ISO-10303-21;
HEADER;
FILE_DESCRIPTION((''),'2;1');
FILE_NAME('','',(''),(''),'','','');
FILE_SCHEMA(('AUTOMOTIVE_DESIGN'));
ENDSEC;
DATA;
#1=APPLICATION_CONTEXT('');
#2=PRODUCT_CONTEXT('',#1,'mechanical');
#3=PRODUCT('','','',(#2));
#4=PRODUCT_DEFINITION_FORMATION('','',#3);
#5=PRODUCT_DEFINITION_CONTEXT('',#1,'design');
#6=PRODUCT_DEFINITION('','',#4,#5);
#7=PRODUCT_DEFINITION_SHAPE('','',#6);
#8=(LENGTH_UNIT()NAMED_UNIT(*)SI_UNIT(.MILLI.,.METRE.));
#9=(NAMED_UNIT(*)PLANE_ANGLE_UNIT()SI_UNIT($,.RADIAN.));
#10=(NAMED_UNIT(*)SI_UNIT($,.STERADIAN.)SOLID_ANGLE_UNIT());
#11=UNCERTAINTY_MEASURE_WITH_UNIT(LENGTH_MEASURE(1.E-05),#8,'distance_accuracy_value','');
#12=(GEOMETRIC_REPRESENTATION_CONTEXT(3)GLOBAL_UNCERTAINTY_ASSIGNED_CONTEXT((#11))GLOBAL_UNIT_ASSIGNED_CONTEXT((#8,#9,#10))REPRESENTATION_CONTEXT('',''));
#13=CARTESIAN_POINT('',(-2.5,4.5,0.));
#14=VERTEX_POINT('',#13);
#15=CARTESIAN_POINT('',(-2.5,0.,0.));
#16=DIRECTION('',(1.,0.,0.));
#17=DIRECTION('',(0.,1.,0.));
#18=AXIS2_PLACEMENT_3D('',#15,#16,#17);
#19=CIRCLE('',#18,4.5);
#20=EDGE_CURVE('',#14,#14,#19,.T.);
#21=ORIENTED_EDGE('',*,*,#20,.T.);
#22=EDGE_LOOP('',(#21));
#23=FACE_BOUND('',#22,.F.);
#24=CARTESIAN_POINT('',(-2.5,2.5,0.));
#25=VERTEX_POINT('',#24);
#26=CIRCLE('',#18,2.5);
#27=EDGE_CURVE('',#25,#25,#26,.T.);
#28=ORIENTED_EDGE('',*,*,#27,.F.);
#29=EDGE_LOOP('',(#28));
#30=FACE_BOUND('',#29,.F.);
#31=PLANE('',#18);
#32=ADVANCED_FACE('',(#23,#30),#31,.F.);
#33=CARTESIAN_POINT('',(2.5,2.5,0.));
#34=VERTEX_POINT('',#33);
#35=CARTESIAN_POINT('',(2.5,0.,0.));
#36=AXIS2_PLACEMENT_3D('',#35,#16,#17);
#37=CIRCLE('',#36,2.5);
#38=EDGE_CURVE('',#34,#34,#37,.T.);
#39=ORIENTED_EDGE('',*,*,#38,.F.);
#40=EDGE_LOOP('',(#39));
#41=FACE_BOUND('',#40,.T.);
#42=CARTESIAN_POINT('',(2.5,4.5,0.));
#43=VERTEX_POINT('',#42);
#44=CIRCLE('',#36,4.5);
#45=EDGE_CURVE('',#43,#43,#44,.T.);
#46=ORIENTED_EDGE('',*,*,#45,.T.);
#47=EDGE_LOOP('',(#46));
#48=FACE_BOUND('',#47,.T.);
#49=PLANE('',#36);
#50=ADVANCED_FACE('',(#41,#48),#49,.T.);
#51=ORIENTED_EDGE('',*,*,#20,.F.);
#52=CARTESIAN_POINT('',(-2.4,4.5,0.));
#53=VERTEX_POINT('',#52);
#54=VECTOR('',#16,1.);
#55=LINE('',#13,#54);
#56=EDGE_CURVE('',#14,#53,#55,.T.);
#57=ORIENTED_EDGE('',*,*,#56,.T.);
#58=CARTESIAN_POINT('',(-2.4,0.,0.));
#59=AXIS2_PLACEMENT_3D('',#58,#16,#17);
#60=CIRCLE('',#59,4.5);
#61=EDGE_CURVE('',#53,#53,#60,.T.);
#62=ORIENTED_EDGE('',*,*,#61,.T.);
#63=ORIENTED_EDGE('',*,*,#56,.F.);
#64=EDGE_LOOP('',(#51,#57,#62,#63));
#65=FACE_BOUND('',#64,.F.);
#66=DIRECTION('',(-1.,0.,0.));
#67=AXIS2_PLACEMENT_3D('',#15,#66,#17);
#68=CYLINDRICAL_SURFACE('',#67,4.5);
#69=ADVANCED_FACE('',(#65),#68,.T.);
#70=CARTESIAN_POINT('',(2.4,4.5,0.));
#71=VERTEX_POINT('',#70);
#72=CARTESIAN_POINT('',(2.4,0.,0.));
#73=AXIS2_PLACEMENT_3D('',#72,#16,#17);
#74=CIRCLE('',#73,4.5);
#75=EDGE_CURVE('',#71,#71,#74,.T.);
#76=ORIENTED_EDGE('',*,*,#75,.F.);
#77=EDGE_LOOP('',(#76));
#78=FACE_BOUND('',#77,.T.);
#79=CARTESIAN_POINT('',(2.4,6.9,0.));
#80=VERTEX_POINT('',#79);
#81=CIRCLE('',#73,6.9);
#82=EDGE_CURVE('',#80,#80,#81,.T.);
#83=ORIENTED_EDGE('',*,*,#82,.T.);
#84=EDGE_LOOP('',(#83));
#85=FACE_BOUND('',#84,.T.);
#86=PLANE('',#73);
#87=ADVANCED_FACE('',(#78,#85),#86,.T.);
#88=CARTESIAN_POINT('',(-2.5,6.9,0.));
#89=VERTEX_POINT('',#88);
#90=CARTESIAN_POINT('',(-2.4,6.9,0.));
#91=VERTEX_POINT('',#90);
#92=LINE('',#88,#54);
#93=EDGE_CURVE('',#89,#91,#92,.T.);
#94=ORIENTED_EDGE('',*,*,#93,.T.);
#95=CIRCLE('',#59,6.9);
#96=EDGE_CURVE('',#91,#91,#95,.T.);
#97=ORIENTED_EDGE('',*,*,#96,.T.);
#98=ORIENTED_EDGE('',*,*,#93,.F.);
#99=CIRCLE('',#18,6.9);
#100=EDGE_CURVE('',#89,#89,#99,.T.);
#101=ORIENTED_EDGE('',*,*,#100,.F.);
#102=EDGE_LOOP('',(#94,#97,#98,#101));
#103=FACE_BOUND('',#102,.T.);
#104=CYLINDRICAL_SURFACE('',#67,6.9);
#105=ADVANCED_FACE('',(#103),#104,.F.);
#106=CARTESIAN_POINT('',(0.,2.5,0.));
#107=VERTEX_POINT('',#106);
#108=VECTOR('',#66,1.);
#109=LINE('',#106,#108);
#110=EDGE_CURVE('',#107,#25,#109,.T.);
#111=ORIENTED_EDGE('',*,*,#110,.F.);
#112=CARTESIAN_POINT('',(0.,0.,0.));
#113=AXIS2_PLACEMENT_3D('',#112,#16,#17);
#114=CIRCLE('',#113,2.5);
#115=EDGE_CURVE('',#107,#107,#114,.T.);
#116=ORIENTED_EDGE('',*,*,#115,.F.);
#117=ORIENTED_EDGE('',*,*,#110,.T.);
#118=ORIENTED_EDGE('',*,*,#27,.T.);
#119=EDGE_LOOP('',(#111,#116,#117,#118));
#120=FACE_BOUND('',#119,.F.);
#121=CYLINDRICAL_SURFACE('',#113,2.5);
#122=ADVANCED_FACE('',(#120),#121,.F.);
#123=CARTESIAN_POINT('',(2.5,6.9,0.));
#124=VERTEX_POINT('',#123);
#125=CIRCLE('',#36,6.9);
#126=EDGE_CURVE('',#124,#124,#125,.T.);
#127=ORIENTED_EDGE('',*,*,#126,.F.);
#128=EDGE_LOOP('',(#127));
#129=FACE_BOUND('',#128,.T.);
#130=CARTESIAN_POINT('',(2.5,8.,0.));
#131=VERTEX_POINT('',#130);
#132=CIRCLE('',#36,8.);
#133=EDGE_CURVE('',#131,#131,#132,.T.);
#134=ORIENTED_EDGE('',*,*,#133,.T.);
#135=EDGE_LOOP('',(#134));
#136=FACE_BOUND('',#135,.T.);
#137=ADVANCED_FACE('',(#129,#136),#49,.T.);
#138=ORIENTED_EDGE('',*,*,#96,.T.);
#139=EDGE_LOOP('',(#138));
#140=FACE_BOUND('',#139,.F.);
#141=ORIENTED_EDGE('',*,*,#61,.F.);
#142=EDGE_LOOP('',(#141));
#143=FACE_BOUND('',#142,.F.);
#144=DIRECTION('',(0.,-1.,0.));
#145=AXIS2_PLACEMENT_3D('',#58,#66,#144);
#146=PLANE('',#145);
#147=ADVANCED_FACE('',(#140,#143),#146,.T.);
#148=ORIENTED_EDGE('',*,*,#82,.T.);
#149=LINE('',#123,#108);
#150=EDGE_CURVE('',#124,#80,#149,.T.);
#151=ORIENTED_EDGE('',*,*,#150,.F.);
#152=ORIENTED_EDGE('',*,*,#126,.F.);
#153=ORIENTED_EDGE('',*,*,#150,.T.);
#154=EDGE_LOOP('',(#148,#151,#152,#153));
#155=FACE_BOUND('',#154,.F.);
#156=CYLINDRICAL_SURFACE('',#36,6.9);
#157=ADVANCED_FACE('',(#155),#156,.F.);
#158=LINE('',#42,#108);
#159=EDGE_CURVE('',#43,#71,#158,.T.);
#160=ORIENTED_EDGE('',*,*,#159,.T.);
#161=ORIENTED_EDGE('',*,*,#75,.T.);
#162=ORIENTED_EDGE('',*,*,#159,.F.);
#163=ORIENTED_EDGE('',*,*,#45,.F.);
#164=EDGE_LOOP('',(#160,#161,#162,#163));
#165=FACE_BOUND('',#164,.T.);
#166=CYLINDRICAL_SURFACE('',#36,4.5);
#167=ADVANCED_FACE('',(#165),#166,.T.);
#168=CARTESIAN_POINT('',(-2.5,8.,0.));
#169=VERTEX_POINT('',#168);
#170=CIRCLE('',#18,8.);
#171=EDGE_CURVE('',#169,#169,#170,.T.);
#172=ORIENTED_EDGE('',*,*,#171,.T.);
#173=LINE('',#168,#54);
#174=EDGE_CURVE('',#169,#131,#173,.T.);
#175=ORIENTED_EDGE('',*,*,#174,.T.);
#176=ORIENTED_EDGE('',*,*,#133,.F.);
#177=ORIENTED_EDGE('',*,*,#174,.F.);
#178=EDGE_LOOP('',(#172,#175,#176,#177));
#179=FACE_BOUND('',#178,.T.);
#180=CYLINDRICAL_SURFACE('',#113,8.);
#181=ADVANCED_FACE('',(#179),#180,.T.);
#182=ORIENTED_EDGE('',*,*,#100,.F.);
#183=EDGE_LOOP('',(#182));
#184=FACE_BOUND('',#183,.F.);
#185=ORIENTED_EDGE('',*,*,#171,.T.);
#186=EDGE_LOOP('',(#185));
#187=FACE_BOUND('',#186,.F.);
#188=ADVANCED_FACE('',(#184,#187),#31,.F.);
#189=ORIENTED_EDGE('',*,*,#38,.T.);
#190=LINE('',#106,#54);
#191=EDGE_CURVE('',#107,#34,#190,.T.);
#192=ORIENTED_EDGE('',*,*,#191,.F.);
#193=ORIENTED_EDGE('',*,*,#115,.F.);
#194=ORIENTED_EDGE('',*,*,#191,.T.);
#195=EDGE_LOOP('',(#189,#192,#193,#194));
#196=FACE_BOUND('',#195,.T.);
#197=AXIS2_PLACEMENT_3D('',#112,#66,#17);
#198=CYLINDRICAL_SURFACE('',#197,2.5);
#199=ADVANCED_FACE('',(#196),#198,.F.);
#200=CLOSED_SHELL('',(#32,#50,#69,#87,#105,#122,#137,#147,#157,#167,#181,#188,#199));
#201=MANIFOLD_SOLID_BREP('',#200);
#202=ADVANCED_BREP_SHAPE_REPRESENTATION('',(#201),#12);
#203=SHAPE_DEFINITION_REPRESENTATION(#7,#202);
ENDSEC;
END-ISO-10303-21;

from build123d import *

# Parameters (mm, degrees)
F0_R          = 8
F0_R_2        = 2.5
F1_DEPTH      = 2.5
F1_DEPTH_BACK = 2.5
F2_R          = 6.9
F2_R_2        = 4.5
F3_DEPTH      = 0.1


# Not quite as in the source:
# - a pattern or mirror of a feature is missing from the dataset's text; its kind, count and spacing are read off the source's solid


with BuildPart() as f1:
    # F0 (on Right) → F1 (new body, two sides)
    with BuildSketch(Plane.YZ) as f1_sk:
        Circle(F0_R)
        Circle(F0_R_2, mode=Mode.SUBTRACT)
    extrude(amount=F1_DEPTH)
    extrude(f1_sk.sketch, amount=-F1_DEPTH_BACK)

    # F2 (on face) → F3 (cut)
    with BuildSketch(Plane.YZ.offset(2.5)):
        Circle(F2_R)
        Circle(F2_R_2, mode=Mode.SUBTRACT)
    f3 = extrude(amount=-F3_DEPTH, mode=Mode.SUBTRACT)

    # F3_copies: F3 across plane
    add(f3.mirror(Plane(origin=(0, 0, 0), x_dir=(0, 0, -1), z_dir=(-1, 0, 0))), mode=Mode.SUBTRACT)


solid = f1.part
